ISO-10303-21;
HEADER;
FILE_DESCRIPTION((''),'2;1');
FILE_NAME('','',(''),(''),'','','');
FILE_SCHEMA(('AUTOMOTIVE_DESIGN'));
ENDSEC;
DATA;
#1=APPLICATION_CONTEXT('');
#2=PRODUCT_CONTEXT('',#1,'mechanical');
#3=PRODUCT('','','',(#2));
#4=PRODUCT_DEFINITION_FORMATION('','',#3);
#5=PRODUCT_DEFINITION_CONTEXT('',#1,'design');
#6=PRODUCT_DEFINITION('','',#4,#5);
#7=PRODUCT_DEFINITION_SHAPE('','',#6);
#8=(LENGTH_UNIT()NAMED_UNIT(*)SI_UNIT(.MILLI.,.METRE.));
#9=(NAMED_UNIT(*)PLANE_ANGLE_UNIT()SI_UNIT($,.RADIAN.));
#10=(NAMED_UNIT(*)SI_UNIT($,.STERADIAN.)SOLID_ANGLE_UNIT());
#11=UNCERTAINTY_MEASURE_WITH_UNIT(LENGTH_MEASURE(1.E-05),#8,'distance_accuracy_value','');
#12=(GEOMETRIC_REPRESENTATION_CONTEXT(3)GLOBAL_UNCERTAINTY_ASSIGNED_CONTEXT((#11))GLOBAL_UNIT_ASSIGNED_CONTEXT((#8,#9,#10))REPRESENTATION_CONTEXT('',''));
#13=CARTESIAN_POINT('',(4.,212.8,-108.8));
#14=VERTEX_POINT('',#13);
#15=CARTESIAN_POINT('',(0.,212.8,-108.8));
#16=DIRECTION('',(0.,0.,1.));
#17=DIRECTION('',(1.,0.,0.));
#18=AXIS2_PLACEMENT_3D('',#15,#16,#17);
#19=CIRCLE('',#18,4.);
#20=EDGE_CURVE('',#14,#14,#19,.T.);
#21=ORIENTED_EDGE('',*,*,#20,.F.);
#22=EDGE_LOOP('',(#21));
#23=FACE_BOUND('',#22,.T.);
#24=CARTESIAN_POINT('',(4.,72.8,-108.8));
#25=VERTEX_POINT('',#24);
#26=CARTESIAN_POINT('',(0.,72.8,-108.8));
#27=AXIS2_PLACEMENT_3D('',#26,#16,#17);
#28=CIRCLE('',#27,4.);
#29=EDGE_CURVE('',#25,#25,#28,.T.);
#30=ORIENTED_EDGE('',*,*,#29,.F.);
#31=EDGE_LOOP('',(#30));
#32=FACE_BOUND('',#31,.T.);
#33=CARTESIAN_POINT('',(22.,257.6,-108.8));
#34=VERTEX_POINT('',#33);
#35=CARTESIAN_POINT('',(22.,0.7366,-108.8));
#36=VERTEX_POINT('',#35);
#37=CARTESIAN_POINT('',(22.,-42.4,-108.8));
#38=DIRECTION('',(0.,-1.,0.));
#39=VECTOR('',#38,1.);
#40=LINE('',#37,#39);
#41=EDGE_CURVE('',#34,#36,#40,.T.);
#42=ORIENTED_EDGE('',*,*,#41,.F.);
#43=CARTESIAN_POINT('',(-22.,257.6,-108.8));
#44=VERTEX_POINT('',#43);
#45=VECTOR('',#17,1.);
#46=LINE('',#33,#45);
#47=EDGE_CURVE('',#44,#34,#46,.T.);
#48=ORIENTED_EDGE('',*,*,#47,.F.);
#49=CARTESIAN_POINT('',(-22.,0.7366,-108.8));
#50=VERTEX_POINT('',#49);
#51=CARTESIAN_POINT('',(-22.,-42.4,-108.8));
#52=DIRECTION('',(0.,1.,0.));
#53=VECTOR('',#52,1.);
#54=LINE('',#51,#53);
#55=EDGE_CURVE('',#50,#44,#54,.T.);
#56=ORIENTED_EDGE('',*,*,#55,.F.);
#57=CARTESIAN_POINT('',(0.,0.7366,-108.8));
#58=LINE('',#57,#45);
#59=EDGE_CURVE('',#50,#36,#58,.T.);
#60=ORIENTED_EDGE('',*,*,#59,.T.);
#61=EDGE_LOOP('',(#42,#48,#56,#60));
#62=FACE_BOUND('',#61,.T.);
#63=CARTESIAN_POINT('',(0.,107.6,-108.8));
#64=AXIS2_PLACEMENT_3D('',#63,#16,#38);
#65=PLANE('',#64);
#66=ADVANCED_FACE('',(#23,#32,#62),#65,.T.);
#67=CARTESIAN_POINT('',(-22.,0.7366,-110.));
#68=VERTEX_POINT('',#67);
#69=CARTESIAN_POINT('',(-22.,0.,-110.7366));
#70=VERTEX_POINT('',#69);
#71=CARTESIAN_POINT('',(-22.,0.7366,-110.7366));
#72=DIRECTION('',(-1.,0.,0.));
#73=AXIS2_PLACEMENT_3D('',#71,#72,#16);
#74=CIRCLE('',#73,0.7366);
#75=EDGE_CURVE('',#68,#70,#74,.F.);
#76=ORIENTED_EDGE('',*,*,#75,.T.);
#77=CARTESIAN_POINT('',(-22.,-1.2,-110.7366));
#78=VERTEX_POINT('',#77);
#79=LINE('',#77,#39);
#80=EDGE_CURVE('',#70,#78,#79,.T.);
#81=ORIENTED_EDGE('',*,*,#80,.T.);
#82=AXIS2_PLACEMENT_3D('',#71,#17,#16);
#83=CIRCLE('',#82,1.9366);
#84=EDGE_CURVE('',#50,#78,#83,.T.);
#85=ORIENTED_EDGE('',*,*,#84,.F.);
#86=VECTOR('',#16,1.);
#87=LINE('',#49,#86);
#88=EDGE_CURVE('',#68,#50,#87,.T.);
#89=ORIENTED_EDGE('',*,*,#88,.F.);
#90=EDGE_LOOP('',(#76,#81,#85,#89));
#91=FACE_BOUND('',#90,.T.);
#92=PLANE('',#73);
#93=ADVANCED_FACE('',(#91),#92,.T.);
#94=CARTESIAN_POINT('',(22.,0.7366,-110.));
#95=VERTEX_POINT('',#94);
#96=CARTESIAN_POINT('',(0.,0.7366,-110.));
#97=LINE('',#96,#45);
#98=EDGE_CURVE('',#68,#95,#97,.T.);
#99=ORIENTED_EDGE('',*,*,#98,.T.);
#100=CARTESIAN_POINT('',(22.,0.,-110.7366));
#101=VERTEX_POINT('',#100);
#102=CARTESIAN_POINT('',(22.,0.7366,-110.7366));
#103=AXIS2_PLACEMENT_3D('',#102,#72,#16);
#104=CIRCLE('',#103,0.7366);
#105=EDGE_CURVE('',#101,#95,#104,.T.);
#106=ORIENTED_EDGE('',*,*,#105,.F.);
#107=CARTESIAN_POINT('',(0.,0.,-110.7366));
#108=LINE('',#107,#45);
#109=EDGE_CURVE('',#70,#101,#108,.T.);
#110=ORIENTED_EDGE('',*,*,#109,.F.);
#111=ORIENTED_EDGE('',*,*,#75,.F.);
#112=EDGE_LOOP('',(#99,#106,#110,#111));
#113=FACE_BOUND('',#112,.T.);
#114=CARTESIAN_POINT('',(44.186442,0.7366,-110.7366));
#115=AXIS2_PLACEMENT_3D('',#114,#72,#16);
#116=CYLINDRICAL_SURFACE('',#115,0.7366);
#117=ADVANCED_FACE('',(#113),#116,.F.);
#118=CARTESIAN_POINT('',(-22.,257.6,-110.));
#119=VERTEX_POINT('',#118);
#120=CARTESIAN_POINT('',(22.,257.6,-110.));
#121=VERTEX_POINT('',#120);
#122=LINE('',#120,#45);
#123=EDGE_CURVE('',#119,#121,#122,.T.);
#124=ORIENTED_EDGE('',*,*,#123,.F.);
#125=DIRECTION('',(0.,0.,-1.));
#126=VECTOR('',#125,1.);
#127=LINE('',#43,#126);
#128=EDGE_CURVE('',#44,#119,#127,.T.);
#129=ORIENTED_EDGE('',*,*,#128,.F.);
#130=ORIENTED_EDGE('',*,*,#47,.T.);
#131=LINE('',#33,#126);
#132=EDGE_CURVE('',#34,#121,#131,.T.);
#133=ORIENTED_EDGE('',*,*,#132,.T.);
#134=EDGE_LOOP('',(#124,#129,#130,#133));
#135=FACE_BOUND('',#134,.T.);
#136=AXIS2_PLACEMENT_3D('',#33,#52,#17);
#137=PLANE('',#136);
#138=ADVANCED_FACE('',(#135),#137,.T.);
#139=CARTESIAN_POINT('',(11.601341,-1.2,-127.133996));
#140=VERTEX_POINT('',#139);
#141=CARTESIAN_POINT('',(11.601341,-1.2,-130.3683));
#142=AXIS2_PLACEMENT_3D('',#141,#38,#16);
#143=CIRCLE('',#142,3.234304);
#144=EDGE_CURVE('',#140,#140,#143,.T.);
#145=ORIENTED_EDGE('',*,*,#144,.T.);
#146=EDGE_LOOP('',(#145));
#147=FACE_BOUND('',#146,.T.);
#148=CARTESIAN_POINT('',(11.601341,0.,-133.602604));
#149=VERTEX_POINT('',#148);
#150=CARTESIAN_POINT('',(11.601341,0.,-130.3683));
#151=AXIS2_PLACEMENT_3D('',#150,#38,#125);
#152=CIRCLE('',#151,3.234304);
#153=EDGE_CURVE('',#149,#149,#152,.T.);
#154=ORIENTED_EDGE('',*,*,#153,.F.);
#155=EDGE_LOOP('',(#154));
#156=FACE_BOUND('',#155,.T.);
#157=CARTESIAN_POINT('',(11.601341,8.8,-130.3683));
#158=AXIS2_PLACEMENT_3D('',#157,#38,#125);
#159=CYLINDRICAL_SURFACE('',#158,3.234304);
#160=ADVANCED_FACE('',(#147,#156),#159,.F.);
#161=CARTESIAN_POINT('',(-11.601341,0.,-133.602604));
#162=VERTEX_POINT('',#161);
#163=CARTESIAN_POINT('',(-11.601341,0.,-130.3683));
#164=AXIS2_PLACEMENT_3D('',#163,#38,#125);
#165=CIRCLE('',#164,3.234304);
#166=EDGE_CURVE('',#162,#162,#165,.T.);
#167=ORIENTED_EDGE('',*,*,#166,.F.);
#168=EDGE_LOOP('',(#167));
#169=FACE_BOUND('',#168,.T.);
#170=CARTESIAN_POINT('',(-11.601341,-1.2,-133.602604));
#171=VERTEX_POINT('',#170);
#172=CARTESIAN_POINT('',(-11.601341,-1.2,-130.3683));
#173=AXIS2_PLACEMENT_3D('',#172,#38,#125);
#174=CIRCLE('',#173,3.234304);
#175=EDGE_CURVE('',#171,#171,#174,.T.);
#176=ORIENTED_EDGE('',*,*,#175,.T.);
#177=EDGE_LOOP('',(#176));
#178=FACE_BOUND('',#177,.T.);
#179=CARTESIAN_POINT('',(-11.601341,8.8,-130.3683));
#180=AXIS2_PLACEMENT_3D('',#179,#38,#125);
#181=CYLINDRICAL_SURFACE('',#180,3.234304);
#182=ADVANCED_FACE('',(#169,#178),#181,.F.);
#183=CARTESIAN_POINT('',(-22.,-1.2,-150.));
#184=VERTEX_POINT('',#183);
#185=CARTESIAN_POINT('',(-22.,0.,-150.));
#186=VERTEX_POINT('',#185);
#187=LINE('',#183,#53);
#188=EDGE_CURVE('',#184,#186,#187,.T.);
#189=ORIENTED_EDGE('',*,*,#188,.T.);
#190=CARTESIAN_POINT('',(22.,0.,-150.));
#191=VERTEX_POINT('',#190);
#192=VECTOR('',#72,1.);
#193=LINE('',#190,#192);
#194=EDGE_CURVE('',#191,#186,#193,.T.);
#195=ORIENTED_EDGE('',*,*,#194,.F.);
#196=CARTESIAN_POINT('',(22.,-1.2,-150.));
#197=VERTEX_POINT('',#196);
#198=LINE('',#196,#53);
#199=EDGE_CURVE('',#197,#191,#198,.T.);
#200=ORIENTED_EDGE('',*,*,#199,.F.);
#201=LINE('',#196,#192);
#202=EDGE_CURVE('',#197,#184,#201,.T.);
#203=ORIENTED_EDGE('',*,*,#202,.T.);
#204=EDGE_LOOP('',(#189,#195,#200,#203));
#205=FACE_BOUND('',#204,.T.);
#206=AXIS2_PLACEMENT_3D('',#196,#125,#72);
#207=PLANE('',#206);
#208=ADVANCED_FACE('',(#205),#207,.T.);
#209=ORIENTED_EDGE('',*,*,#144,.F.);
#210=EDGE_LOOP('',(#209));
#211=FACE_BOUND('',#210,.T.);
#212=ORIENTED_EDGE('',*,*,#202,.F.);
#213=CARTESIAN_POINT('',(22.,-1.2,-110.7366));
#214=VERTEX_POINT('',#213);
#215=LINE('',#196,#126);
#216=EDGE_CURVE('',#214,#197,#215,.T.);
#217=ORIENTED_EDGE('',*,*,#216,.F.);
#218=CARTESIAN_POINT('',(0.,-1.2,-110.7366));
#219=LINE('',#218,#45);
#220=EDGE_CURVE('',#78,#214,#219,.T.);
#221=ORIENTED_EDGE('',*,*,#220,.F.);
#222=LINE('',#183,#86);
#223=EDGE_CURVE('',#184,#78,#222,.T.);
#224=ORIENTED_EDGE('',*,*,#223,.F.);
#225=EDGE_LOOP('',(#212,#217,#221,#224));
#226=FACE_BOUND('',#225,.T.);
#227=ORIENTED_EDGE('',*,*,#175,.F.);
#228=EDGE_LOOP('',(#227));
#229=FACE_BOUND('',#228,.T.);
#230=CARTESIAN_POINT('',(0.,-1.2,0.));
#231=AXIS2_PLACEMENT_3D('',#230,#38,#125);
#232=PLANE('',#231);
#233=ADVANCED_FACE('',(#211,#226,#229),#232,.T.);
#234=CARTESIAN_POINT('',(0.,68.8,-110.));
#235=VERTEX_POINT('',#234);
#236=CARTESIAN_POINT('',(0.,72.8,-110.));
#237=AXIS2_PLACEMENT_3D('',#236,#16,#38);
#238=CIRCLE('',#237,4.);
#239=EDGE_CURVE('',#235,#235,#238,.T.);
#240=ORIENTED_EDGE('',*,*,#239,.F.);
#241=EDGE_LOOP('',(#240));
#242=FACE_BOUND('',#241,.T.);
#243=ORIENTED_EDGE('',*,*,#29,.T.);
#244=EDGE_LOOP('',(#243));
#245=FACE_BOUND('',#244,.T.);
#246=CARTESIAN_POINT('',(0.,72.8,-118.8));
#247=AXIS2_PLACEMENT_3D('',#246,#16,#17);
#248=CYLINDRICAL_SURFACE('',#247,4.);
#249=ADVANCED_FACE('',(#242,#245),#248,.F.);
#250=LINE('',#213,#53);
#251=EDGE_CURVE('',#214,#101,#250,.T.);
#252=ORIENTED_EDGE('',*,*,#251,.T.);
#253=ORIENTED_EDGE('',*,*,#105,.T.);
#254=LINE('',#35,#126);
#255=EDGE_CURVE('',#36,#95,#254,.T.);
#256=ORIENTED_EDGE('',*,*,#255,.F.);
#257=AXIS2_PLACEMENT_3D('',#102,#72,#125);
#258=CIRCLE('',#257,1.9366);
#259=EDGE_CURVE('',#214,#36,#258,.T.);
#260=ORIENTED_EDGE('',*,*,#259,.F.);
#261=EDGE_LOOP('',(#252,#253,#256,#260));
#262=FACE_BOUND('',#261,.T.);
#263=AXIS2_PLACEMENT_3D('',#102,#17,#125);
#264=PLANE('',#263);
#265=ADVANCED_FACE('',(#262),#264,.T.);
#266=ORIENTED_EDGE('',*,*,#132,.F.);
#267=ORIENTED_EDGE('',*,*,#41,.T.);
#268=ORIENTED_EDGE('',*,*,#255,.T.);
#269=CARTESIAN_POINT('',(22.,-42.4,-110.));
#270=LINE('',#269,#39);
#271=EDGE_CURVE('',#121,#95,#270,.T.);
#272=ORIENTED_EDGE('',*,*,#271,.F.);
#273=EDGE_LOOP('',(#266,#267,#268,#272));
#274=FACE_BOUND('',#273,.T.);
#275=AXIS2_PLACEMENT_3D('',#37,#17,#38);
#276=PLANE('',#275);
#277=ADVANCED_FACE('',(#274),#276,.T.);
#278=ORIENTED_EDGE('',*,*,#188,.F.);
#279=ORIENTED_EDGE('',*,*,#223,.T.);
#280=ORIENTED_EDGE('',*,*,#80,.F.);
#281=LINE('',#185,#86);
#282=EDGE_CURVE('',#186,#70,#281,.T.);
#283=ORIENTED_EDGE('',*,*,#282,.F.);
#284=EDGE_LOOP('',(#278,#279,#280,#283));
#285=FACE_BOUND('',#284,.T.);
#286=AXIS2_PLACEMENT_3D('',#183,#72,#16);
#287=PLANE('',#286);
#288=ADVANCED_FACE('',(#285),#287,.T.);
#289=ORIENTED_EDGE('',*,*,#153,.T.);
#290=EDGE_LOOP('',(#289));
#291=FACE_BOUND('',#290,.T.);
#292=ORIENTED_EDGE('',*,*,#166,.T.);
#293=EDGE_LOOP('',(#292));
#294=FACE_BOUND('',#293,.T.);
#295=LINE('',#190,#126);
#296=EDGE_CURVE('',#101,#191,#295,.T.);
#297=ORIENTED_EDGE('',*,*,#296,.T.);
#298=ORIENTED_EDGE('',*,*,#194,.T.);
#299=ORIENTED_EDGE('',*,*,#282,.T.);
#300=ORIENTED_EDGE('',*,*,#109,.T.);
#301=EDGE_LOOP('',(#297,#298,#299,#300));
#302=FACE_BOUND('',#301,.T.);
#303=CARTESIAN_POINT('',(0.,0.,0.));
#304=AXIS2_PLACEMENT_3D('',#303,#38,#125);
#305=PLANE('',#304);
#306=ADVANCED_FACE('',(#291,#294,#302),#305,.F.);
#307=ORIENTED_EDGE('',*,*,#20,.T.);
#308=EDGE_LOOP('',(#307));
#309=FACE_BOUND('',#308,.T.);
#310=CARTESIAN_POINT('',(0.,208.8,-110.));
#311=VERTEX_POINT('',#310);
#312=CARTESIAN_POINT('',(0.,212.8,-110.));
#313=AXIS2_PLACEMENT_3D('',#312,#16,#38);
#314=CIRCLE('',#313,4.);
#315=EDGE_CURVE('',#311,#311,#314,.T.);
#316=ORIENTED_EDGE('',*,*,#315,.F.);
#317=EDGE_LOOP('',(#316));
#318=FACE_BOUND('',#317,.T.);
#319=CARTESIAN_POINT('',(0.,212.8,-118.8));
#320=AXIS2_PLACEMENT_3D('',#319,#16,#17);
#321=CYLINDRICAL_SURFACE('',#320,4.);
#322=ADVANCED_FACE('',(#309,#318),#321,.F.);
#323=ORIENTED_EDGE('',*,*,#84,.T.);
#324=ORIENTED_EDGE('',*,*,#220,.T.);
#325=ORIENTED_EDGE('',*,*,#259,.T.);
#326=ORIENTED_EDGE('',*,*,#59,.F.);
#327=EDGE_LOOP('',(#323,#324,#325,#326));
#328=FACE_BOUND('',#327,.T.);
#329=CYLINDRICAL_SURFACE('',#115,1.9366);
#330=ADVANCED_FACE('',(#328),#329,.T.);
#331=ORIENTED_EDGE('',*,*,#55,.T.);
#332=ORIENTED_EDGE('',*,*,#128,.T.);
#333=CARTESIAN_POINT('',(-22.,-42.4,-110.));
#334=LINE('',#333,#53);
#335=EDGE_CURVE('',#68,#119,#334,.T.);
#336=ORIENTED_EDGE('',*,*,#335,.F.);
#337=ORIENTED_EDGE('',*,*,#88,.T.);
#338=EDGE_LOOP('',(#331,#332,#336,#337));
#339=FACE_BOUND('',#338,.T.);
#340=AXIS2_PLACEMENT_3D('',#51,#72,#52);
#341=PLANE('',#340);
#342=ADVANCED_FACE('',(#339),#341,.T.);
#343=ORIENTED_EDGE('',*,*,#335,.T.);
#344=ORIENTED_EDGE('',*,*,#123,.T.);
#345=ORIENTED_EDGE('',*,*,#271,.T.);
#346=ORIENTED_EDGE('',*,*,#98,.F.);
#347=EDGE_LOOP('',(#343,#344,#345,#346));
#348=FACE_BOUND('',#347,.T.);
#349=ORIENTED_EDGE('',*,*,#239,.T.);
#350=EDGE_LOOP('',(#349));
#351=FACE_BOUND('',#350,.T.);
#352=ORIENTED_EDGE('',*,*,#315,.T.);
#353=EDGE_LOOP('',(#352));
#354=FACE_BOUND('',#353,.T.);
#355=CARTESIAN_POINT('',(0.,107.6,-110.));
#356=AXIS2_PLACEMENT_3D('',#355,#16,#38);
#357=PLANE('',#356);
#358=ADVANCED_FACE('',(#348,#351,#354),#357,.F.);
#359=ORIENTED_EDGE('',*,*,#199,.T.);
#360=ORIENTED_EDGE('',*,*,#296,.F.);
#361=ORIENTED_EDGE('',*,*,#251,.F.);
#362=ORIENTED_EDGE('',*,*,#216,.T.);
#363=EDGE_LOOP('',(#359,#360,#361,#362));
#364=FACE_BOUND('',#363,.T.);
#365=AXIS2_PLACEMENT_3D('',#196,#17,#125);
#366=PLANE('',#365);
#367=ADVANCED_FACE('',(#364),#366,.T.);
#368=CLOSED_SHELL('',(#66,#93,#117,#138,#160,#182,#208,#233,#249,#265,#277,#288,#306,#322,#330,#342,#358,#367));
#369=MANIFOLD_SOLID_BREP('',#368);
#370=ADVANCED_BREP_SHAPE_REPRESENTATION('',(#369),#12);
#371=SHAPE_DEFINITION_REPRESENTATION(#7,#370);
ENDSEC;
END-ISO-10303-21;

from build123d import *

# Parameters (mm, degrees)
SKETCH1_W              = 44
SKETCH1_H              = 300
BASE_FLANGE1_DEPTH     = 1.2
SKETCHED_START         = -22
SKETCHED_BEND1_DEPTH   = 44
SKETCHED_BEND1_2_DEPTH = 44
SKETCH7_R              = 4
CUT_EXTRUDE1_DEPTH     = 10
SKETCH9_R              = 3.234304459
CUT_EXTRUDE2_DEPTH     = 10


# Read off the part's stored shape, not the designer's step: Sketched Bend1
# Sheet-metal steps are written as plain solids
with BuildPart() as part:
    # Sketch1 → Base-Flange1 (new body)
    with BuildSketch(Plane(origin=(0, 0, 0), x_dir=(1, 0, 0), z_dir=(0, 1, 0))):
        Rectangle(SKETCH1_W, SKETCH1_H)
    extrude(amount=-BASE_FLANGE1_DEPTH)

    # Sketched Bend1 outline → Sketched Bend1 (cut)
    with BuildSketch(Plane.YZ.offset(SKETCHED_START)):
        with BuildLine():
            ThreePointArc((-1.2, -110.7366), (-0.872269031, -109.658657516), (0, -108.945555612))
            Line((0, -108.945555612), (0, 150))
            Line((0, 150), (-1.2, 150))
            Line((-1.2, 150), (-1.2, -110.7366))
        make_face()
    extrude(amount=SKETCHED_BEND1_DEPTH, mode=Mode.SUBTRACT)

    # Sketched Bend1 2 outline → Sketched Bend1 2 (add)
    with BuildSketch(Plane.YZ.offset(SKETCHED_START)):
        with BuildLine():
            Line((257.6, -110), (257.6, -108.8))
            Line((257.6, -108.8), (0.7366, -108.8))
            ThreePointArc((0.7366, -108.8), (0.361178238, -108.836737358), (0, -108.945555612))
            Line((0, -108.945555612), (0, -110.7366))
            ThreePointArc((0, -110.7366), (0.215745145, -110.215745145), (0.7366, -110))
            Line((0.7366, -110), (257.6, -110))
        make_face()
    extrude(amount=SKETCHED_BEND1_2_DEPTH)

    # Sketch7 → Cut-Extrude1 (cut)
    with BuildSketch(Plane.XY.offset(-108.8)):
        with Locations((0, 72.8)):
            Circle(SKETCH7_R)
        with Locations((0, 212.8)):
            Circle(SKETCH7_R)
    extrude(amount=-CUT_EXTRUDE1_DEPTH, mode=Mode.SUBTRACT)

    # Sketch9 → Cut-Extrude2 (cut)
    with BuildSketch(Plane.XZ.offset(1.2)):
        with Locations(Location((-11.601340887, -130.3683, 0), (0, 0, 270))):
            Circle(SKETCH9_R)
        with Locations(Location((11.601340887, -130.3683, 0), (0, 0, 270))):
            Circle(SKETCH9_R)
    extrude(amount=-CUT_EXTRUDE2_DEPTH, mode=Mode.SUBTRACT)


solid = part.part
